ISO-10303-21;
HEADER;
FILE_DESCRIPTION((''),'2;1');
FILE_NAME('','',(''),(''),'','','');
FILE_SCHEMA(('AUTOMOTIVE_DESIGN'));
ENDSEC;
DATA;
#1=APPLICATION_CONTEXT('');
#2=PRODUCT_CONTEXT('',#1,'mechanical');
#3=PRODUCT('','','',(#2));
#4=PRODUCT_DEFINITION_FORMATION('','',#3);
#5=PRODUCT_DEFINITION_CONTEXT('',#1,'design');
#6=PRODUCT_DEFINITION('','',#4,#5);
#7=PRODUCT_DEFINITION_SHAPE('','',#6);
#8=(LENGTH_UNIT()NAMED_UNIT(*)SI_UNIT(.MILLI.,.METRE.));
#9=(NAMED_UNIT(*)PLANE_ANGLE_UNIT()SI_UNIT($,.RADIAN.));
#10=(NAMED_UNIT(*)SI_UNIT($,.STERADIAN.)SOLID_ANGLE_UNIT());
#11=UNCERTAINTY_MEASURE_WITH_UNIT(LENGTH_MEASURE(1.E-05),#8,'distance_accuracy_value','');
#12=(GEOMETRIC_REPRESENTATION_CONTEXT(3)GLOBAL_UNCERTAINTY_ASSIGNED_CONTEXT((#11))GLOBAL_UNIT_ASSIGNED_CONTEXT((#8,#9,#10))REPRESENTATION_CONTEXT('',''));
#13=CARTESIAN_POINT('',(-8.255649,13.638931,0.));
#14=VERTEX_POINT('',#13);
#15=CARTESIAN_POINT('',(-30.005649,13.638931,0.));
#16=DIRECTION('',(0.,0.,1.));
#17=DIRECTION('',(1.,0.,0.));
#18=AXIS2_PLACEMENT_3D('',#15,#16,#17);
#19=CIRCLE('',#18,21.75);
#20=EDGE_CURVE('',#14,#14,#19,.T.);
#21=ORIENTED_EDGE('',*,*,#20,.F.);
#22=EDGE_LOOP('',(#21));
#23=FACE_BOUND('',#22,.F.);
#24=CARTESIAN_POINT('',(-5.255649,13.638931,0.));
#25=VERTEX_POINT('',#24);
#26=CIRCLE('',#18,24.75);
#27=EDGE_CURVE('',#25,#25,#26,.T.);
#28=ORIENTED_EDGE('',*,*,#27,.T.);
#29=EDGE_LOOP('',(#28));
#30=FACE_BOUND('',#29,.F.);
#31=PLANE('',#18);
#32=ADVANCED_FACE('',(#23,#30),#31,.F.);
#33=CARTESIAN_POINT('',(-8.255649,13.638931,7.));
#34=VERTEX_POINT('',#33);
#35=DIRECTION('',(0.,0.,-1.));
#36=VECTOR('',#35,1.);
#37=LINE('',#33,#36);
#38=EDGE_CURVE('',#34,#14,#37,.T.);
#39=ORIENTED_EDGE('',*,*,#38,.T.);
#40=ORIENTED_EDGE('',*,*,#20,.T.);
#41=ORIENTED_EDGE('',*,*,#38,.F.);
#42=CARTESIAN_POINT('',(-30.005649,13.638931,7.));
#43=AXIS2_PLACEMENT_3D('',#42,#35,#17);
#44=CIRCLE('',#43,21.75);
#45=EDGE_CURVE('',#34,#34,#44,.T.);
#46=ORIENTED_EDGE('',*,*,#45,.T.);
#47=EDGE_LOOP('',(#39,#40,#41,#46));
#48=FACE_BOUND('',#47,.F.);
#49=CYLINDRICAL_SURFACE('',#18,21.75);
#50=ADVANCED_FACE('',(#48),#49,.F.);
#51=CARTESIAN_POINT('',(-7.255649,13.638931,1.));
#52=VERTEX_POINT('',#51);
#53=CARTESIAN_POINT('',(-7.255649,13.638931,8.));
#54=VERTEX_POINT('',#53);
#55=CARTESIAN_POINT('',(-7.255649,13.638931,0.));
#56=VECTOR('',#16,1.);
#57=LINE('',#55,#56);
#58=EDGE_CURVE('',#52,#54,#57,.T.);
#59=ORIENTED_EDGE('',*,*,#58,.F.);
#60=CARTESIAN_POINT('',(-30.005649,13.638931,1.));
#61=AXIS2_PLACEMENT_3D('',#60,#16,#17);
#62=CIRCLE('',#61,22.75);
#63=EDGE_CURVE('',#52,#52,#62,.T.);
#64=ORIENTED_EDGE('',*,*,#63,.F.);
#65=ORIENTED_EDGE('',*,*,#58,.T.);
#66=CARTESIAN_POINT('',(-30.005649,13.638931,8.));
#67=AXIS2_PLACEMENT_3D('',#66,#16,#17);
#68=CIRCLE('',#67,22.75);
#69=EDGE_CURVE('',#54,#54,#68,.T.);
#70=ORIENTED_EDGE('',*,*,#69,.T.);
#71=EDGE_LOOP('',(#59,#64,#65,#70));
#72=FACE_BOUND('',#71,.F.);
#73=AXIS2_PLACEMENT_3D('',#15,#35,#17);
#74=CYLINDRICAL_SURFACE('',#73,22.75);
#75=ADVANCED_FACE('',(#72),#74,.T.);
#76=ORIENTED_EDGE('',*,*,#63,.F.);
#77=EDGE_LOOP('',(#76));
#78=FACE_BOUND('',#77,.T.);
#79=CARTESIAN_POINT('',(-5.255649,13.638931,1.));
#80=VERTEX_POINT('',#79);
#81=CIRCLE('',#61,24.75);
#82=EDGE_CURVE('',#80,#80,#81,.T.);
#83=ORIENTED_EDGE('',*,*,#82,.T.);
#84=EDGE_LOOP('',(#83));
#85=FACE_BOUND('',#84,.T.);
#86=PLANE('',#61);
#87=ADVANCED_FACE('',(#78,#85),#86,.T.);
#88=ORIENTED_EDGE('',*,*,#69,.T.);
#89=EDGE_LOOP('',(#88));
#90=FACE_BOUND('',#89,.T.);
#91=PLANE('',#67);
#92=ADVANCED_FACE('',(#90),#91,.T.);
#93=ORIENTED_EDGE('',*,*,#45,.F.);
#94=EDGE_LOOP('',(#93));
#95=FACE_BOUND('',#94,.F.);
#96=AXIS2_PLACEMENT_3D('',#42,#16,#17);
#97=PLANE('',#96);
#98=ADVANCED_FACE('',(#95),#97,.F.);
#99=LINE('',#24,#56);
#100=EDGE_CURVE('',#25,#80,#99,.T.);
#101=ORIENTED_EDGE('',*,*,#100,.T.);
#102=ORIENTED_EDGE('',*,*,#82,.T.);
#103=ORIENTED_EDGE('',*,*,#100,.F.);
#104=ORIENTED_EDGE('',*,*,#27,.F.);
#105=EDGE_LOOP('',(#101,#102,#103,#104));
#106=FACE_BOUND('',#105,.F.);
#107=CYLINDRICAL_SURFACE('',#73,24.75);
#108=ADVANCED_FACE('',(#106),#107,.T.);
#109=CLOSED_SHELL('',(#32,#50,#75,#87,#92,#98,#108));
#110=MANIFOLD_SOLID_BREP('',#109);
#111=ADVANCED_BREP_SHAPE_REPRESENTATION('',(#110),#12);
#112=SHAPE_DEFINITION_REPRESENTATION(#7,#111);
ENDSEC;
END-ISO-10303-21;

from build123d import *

# Parameters (mm, degrees)
F0_R     = 24.75
F0_R_2   = 22.75
F1_DEPTH = 1
F0_R_3   = 21.75
F0_R_4   = 20.75
F2_DEPTH = 8
F3_T     = 1


# Not quite as in the source:
# - a shell that OpenCascade refuses in one call is made with other operations: the cavity is built on its own and cut out


with BuildPart() as f1:
    # F0 (on Top) → F1 (new body)
    with BuildSketch(Plane.XY):
        with Locations((-30.0056487322, 13.6389313266)):
            Circle(F0_R)
        with Locations((-30.0056487322, 13.6389313266)):
            Circle(F0_R_2, mode=Mode.SUBTRACT)
    extrude(amount=F1_DEPTH)

    # F0 (on Top) → F2 (join)
    with BuildSketch(Plane.XY):
        with Locations((-30.0056487322, 13.6389313266)):
            Circle(F0_R_2)
        with Locations((-30.0056487322, 13.6389313266)):
            Circle(F0_R_3, mode=Mode.SUBTRACT)
        with Locations((-30.0056487322, 13.6389313266)):
            Circle(F0_R_3)
        with Locations((-30.0056487322, 13.6389313266)):
            Circle(F0_R_4, mode=Mode.SUBTRACT)
        with Locations((-30.0056487322, 13.6389313266)):
            Circle(F0_R_4)
    extrude(amount=F2_DEPTH)

    # F3: shell of thickness 1, made by hand


with BuildPart() as f3_core1:
    # F3_t2: copy of F1
    add(f1.part)

    # the walls: a layer under each face that stays
    f3_faces = [f3_core1.faces().sort_by_distance(p)[0] for p in [
        (-54.7556487322, 13.6389313266, 0.5),
        (-46.5056487322, -2.8610686734, 1),
        (-52.7556487322, 13.6389313266, 4.5),
        (-30.0056487322, 13.6389313266, 8),
    ]]
    thicken(f3_faces, amount=-F3_T, mode=Mode.SUBTRACT)

    # F3_s3 → F3_t4 (revolve, cut)
    with BuildSketch(Plane.XZ.offset(-13.6389313266)):
        Polygon((-7.2456487322, 1.01), (-7.2556487322, 0), (-8.2556487322, 0), (-8.2556487322, 1), align=None)
    revolve(axis=Axis((-30.0056487322, 13.6389313266, 1), (0, 0, 1)), mode=Mode.SUBTRACT)


with BuildPart() as f1_1:
    add(f1.part)

    # what is left inside the walls is the cavity
    f3_cavity = [f3_core1.part.solids().sort_by_distance(p)[0] for p in [
        (-30.005649, 6.388931, 6.99),
    ]]
    add(f3_cavity, mode=Mode.SUBTRACT)


solid = f1_1.part
